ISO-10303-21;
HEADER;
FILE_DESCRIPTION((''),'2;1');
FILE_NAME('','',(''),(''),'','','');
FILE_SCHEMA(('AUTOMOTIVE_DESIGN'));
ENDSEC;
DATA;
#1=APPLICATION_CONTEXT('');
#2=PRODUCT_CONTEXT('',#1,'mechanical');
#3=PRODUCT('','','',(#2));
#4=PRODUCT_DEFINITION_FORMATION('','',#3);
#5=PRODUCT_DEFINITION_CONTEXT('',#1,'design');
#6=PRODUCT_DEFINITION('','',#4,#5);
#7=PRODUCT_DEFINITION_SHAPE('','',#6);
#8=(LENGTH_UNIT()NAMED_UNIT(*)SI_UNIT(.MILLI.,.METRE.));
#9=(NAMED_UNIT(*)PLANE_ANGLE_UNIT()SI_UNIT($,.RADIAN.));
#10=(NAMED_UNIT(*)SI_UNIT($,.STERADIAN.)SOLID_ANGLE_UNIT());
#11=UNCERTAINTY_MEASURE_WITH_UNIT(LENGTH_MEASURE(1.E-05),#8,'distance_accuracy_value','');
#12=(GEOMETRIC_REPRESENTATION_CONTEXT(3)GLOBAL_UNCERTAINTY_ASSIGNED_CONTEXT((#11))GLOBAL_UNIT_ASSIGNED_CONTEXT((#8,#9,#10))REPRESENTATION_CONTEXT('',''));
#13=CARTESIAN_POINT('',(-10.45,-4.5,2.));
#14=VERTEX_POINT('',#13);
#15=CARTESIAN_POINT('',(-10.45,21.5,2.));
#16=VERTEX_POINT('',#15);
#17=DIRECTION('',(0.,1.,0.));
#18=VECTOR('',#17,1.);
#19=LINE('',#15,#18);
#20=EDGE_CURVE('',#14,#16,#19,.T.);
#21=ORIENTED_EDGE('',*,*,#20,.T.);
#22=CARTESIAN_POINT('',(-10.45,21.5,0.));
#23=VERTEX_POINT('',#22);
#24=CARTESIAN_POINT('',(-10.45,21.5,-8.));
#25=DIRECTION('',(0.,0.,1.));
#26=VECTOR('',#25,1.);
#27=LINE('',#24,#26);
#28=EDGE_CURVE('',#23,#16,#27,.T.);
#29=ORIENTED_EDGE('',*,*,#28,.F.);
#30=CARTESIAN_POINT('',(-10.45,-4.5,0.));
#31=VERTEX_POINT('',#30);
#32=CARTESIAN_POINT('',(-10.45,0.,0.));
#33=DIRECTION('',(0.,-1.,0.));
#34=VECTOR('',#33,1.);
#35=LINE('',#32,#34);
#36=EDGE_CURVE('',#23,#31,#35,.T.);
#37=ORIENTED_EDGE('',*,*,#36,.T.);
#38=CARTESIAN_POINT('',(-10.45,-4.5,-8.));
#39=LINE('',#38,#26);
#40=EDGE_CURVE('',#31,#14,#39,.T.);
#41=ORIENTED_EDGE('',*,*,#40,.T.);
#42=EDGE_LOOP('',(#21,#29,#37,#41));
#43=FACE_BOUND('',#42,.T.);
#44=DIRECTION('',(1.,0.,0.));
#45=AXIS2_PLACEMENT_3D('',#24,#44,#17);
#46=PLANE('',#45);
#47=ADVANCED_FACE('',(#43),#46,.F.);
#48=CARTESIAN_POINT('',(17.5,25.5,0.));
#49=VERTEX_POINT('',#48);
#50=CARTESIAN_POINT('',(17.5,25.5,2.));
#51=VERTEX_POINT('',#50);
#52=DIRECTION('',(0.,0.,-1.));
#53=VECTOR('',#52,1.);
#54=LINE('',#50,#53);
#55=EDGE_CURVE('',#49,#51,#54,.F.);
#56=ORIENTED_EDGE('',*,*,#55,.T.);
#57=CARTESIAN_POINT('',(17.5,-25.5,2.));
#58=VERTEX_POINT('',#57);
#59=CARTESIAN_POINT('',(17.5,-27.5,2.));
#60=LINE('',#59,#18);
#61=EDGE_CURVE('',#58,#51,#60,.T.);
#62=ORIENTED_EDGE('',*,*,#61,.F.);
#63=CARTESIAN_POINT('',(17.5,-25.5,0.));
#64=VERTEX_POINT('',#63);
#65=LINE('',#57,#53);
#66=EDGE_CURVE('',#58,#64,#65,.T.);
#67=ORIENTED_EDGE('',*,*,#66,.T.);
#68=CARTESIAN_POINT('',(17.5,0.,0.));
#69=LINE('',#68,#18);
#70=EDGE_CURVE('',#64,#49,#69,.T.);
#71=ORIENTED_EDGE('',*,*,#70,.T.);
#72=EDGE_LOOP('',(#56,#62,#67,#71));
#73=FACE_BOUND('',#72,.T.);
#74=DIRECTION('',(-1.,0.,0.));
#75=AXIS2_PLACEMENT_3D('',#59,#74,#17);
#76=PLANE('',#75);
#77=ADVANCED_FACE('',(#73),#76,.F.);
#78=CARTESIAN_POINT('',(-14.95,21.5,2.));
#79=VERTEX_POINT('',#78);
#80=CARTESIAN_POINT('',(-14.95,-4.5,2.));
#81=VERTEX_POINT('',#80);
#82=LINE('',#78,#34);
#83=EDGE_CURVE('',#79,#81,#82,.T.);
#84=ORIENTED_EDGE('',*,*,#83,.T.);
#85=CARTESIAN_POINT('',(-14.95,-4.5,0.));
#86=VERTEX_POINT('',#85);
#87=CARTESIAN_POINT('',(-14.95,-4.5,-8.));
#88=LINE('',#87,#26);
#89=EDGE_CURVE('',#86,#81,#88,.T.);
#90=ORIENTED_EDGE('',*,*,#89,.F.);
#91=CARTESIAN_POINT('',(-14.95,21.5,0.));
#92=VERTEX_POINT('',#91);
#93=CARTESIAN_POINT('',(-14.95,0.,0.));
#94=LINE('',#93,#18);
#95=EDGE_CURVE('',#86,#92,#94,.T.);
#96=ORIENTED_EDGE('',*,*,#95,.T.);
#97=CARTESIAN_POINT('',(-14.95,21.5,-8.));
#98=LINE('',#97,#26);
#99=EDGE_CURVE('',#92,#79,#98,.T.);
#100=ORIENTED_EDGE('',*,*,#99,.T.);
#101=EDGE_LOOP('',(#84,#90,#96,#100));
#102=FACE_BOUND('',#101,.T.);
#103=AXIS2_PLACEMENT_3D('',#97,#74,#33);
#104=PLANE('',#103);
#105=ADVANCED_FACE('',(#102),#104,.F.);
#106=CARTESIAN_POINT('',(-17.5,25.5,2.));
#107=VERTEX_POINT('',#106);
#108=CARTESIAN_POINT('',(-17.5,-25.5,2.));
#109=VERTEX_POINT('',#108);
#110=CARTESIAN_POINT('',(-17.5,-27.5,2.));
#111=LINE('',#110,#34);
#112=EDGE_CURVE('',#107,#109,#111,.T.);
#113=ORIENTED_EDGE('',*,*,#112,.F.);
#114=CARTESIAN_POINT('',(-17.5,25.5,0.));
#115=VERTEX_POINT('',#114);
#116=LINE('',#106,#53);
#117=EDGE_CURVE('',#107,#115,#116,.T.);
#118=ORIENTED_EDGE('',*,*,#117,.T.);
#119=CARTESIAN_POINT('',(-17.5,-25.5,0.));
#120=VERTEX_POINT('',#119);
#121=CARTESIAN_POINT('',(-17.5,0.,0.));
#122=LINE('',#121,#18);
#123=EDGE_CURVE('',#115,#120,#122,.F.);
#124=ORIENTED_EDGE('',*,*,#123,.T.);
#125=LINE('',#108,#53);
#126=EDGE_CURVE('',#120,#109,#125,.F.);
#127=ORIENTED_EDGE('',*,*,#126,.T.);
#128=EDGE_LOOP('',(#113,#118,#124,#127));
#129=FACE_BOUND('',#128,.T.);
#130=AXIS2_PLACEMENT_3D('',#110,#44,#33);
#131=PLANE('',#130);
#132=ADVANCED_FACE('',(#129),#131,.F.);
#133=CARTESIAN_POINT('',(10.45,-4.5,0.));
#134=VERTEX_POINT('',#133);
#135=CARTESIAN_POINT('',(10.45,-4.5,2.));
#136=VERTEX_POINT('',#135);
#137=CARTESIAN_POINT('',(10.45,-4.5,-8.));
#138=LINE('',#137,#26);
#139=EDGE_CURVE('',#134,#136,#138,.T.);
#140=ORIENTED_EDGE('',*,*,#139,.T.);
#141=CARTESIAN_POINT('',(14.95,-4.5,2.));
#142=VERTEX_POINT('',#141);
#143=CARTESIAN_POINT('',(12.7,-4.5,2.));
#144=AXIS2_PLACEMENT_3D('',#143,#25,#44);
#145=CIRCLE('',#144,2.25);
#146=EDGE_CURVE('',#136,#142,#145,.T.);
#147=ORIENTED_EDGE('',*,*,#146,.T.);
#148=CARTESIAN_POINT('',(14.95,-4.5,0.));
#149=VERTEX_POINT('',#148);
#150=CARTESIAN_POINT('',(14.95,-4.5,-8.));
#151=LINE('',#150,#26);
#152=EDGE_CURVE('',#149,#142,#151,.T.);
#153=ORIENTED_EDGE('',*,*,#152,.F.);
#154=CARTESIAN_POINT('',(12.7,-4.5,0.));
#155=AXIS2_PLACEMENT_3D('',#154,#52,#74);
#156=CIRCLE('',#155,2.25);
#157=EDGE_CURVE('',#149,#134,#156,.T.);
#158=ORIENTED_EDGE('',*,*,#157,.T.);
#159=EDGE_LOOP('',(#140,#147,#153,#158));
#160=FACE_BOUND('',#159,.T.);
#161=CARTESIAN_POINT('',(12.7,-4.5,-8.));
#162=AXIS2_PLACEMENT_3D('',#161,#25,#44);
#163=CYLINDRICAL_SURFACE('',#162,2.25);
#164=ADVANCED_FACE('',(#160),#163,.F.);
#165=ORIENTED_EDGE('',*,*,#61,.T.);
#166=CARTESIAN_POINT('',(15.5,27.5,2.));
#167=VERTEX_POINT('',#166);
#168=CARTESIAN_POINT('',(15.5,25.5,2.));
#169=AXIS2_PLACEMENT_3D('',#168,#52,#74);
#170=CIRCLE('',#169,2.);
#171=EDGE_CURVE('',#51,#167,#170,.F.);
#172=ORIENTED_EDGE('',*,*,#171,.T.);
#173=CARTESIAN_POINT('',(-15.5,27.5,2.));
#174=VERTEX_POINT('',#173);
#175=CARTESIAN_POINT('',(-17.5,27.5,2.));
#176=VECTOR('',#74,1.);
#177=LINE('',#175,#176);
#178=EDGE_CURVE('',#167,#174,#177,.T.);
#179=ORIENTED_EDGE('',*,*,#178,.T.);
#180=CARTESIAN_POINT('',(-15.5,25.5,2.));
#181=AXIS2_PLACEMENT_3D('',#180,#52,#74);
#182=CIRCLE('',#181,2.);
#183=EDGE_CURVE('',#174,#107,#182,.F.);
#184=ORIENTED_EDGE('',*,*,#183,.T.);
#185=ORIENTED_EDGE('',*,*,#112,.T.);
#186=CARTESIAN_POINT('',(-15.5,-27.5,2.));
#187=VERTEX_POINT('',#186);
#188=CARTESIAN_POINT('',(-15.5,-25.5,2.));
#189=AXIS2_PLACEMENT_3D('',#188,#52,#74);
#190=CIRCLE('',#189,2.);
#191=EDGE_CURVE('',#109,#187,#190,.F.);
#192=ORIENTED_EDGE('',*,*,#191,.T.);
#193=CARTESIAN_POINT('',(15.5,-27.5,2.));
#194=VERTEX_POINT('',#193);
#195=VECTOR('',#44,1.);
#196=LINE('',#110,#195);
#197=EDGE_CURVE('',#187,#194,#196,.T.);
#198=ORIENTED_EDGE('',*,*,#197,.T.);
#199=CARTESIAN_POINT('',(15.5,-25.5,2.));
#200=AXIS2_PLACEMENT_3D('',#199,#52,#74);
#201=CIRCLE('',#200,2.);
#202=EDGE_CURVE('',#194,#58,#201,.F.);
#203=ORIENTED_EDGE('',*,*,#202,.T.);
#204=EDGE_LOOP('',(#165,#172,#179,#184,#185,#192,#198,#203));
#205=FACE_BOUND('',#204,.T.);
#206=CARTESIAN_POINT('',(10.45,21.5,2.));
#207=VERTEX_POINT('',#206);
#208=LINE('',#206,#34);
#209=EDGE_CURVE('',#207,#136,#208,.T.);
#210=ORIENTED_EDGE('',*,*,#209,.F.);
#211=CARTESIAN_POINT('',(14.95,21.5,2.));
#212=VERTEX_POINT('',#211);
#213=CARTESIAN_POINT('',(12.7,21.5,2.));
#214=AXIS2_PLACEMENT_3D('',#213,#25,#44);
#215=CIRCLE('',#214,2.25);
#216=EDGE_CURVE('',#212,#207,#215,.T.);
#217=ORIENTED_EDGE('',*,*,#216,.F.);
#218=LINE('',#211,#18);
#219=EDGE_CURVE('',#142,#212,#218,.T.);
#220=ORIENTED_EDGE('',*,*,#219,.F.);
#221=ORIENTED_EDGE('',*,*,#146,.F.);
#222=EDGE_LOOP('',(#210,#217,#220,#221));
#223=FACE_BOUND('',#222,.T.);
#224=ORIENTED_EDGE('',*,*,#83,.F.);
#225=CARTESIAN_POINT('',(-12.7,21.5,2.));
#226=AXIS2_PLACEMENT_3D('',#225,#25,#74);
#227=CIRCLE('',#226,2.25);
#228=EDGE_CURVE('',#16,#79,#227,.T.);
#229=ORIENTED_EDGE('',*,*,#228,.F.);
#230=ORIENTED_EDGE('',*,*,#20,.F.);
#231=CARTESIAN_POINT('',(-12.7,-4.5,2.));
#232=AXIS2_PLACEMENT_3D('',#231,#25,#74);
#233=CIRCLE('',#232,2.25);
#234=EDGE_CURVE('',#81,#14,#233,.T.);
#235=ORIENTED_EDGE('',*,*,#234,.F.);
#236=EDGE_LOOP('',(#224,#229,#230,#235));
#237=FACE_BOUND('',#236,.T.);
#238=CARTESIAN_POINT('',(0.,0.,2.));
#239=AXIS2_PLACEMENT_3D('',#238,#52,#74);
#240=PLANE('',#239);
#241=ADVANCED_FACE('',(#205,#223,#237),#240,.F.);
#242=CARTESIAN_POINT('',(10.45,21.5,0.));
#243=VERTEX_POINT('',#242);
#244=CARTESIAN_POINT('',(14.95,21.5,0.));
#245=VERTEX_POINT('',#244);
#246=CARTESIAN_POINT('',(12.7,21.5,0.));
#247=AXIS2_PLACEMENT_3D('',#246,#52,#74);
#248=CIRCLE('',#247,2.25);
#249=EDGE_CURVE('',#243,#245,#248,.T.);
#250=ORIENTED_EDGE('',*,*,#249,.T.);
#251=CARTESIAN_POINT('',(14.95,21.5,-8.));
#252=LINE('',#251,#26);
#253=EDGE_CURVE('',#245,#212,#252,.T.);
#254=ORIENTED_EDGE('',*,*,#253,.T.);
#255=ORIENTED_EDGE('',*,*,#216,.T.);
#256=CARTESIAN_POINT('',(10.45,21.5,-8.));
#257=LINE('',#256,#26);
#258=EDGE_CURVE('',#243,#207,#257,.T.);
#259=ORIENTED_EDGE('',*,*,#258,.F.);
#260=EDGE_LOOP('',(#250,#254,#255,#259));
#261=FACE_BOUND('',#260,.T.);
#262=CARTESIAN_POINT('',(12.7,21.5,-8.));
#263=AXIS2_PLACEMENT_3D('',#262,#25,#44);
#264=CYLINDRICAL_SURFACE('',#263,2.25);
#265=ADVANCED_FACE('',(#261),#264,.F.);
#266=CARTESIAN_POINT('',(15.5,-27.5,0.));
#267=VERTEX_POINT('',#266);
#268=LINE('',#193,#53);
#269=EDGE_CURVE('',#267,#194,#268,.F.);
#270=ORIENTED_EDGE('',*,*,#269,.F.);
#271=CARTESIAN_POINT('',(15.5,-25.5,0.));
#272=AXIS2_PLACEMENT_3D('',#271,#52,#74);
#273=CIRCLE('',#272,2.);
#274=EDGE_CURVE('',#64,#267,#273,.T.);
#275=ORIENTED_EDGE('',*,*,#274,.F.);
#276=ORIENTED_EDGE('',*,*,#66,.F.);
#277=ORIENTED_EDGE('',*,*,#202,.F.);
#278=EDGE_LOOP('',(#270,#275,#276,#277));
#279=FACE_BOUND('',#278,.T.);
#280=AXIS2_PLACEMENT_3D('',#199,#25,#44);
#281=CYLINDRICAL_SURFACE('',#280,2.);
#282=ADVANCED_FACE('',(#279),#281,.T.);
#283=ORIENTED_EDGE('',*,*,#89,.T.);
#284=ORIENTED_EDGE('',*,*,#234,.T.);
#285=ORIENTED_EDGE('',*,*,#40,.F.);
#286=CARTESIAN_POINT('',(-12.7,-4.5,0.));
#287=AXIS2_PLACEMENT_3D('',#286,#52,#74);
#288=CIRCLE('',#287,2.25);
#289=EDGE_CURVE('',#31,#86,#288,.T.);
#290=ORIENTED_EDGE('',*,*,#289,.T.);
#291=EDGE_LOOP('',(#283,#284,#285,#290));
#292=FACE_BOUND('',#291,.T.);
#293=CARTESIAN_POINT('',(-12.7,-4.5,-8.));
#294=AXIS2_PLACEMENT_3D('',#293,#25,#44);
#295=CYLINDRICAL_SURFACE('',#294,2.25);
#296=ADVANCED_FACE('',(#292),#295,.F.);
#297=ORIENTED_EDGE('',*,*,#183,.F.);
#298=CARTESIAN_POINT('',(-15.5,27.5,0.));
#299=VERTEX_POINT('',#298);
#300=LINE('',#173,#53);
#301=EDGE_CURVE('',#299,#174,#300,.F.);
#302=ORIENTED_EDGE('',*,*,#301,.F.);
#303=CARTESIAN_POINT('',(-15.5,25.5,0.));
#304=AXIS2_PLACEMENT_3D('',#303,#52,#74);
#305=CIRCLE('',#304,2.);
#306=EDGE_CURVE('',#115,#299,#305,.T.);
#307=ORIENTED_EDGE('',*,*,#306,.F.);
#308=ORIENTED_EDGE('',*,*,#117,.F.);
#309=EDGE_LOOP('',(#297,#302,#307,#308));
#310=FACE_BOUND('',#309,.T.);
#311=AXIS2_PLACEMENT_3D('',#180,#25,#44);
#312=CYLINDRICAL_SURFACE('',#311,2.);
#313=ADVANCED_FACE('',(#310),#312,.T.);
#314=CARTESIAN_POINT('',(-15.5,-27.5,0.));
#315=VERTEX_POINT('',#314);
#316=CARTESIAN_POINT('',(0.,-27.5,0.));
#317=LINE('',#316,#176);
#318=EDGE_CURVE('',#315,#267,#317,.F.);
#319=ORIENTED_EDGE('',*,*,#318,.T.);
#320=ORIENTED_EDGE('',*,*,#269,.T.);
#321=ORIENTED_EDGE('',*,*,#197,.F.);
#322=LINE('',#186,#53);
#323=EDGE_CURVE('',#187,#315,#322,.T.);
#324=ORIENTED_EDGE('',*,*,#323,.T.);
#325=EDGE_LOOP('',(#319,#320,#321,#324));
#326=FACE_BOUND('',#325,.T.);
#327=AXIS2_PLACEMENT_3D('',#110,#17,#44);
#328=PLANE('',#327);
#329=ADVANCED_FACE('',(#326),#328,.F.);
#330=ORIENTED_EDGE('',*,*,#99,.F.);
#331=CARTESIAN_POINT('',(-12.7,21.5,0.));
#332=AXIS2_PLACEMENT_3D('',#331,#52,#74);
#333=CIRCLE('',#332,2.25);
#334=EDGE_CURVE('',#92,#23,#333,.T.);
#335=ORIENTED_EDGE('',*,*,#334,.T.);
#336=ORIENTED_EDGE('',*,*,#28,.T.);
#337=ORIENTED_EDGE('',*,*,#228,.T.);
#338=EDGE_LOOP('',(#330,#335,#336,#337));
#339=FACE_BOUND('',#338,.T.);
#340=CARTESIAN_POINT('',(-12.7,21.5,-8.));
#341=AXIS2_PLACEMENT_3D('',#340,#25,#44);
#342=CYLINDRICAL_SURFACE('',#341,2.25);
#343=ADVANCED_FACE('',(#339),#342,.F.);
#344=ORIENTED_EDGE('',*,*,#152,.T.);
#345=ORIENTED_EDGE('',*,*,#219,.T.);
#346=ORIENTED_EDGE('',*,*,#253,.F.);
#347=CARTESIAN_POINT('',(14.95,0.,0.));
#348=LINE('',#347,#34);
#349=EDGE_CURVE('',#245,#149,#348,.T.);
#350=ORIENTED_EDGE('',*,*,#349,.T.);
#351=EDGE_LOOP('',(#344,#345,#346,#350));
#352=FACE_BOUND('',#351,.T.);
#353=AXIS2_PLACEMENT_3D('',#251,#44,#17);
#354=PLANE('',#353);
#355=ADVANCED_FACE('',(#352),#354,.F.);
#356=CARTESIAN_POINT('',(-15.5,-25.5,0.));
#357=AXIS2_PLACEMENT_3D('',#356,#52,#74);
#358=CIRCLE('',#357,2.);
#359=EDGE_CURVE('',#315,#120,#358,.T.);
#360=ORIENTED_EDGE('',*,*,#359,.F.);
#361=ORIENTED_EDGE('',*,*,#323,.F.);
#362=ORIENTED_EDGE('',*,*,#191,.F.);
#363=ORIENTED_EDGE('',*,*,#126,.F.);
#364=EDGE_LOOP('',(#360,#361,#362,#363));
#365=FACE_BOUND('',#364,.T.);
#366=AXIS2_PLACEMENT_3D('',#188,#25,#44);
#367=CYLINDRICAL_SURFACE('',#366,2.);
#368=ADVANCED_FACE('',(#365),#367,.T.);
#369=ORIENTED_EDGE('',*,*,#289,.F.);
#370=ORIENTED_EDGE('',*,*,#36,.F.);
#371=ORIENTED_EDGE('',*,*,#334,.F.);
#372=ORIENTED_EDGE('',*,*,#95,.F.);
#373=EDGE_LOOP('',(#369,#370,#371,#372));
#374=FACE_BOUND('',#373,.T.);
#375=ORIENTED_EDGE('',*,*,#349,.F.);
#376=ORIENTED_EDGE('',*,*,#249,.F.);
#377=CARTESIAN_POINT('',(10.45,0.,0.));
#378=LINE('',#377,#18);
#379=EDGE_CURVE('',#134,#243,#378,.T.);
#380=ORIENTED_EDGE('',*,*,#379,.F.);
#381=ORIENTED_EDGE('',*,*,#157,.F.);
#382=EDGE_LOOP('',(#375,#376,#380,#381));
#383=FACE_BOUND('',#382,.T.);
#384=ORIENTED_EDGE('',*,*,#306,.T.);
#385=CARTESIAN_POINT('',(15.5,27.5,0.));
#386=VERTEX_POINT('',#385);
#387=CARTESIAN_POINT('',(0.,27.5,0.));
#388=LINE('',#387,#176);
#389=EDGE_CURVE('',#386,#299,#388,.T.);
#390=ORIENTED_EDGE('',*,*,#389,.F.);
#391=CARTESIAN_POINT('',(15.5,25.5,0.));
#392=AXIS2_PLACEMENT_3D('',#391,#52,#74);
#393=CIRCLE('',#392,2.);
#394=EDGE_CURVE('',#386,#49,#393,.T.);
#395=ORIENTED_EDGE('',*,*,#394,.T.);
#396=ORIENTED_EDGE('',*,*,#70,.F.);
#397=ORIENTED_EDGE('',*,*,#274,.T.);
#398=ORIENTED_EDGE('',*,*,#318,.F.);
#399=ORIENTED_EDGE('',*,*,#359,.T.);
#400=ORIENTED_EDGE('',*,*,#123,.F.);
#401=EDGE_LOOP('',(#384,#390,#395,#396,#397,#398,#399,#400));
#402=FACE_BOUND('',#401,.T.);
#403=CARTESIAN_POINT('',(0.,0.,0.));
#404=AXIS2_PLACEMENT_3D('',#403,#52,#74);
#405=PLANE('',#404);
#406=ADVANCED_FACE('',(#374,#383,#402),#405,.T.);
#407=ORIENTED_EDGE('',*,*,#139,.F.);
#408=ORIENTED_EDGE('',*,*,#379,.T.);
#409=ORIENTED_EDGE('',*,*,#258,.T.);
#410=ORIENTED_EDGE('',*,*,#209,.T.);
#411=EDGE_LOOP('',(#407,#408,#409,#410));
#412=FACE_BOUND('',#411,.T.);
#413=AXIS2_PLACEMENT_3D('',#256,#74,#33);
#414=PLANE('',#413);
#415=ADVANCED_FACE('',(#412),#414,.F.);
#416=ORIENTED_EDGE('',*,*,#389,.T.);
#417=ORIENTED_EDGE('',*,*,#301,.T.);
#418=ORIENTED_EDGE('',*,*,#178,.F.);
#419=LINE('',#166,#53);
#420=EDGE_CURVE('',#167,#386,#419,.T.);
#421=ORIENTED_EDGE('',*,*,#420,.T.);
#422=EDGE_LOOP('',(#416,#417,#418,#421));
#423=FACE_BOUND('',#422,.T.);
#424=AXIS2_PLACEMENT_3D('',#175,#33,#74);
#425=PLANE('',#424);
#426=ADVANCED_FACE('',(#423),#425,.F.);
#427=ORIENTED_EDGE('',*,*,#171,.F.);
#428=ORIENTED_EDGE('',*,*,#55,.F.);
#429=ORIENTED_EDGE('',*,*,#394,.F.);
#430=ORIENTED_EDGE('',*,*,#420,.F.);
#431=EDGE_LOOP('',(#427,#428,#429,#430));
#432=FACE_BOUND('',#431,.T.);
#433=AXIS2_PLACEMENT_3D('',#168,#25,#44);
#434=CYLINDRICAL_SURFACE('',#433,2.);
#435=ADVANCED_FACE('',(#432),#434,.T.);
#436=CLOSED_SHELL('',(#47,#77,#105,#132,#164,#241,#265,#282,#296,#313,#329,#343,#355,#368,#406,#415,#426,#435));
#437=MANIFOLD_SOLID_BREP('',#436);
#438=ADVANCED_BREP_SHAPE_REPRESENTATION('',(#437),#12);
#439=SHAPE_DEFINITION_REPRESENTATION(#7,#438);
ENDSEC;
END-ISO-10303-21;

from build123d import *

# Parameters (mm, degrees)
SKETCH_1_W          = 35
SKETCH_1_H          = 55
EXTRUDE_1_DEPTH     = 2
CUT_EXTRUDE_1_DEPTH = 10
FILLET_1_R          = 2


with BuildPart() as part:
    # Sketch 1 → 凸台-拉伸1 (new body)
    with BuildSketch(Plane.XY):
        Rectangle(SKETCH_1_W, SKETCH_1_H)
    extrude(amount=EXTRUDE_1_DEPTH)

    # 草图9 → 切除-拉伸1 (cut)
    with BuildSketch(Plane.XY.offset(2)):
        with BuildLine():
            Line((14.95, 21.5), (14.95, -4.5))
            ThreePointArc((14.95, -4.5), (12.7, -6.75), (10.45, -4.5))
            Line((10.45, -4.5), (10.45, 21.5))
            ThreePointArc((10.45, 21.5), (12.7, 23.75), (14.95, 21.5))
        make_face()
        with BuildLine():
            Line((-14.95, 21.5), (-14.95, -4.5))
            ThreePointArc((-14.95, -4.5), (-12.7, -6.75), (-10.45, -4.5))
            Line((-10.45, -4.5), (-10.45, 21.5))
            ThreePointArc((-10.45, 21.5), (-12.7, 23.75), (-14.95, 21.5))
        make_face()
    extrude(amount=-CUT_EXTRUDE_1_DEPTH, mode=Mode.SUBTRACT)

    # 圆角1
    fillet_1_edges = [part.edges().sort_by_distance(p)[0] for p in [
        (17.5, 27.5, 1),
        (17.5, -27.5, 1),
        (-17.5, -27.5, 1),
        (-17.5, 27.5, 1),
    ]]
    fillet(fillet_1_edges, radius=FILLET_1_R)


solid = part.part
